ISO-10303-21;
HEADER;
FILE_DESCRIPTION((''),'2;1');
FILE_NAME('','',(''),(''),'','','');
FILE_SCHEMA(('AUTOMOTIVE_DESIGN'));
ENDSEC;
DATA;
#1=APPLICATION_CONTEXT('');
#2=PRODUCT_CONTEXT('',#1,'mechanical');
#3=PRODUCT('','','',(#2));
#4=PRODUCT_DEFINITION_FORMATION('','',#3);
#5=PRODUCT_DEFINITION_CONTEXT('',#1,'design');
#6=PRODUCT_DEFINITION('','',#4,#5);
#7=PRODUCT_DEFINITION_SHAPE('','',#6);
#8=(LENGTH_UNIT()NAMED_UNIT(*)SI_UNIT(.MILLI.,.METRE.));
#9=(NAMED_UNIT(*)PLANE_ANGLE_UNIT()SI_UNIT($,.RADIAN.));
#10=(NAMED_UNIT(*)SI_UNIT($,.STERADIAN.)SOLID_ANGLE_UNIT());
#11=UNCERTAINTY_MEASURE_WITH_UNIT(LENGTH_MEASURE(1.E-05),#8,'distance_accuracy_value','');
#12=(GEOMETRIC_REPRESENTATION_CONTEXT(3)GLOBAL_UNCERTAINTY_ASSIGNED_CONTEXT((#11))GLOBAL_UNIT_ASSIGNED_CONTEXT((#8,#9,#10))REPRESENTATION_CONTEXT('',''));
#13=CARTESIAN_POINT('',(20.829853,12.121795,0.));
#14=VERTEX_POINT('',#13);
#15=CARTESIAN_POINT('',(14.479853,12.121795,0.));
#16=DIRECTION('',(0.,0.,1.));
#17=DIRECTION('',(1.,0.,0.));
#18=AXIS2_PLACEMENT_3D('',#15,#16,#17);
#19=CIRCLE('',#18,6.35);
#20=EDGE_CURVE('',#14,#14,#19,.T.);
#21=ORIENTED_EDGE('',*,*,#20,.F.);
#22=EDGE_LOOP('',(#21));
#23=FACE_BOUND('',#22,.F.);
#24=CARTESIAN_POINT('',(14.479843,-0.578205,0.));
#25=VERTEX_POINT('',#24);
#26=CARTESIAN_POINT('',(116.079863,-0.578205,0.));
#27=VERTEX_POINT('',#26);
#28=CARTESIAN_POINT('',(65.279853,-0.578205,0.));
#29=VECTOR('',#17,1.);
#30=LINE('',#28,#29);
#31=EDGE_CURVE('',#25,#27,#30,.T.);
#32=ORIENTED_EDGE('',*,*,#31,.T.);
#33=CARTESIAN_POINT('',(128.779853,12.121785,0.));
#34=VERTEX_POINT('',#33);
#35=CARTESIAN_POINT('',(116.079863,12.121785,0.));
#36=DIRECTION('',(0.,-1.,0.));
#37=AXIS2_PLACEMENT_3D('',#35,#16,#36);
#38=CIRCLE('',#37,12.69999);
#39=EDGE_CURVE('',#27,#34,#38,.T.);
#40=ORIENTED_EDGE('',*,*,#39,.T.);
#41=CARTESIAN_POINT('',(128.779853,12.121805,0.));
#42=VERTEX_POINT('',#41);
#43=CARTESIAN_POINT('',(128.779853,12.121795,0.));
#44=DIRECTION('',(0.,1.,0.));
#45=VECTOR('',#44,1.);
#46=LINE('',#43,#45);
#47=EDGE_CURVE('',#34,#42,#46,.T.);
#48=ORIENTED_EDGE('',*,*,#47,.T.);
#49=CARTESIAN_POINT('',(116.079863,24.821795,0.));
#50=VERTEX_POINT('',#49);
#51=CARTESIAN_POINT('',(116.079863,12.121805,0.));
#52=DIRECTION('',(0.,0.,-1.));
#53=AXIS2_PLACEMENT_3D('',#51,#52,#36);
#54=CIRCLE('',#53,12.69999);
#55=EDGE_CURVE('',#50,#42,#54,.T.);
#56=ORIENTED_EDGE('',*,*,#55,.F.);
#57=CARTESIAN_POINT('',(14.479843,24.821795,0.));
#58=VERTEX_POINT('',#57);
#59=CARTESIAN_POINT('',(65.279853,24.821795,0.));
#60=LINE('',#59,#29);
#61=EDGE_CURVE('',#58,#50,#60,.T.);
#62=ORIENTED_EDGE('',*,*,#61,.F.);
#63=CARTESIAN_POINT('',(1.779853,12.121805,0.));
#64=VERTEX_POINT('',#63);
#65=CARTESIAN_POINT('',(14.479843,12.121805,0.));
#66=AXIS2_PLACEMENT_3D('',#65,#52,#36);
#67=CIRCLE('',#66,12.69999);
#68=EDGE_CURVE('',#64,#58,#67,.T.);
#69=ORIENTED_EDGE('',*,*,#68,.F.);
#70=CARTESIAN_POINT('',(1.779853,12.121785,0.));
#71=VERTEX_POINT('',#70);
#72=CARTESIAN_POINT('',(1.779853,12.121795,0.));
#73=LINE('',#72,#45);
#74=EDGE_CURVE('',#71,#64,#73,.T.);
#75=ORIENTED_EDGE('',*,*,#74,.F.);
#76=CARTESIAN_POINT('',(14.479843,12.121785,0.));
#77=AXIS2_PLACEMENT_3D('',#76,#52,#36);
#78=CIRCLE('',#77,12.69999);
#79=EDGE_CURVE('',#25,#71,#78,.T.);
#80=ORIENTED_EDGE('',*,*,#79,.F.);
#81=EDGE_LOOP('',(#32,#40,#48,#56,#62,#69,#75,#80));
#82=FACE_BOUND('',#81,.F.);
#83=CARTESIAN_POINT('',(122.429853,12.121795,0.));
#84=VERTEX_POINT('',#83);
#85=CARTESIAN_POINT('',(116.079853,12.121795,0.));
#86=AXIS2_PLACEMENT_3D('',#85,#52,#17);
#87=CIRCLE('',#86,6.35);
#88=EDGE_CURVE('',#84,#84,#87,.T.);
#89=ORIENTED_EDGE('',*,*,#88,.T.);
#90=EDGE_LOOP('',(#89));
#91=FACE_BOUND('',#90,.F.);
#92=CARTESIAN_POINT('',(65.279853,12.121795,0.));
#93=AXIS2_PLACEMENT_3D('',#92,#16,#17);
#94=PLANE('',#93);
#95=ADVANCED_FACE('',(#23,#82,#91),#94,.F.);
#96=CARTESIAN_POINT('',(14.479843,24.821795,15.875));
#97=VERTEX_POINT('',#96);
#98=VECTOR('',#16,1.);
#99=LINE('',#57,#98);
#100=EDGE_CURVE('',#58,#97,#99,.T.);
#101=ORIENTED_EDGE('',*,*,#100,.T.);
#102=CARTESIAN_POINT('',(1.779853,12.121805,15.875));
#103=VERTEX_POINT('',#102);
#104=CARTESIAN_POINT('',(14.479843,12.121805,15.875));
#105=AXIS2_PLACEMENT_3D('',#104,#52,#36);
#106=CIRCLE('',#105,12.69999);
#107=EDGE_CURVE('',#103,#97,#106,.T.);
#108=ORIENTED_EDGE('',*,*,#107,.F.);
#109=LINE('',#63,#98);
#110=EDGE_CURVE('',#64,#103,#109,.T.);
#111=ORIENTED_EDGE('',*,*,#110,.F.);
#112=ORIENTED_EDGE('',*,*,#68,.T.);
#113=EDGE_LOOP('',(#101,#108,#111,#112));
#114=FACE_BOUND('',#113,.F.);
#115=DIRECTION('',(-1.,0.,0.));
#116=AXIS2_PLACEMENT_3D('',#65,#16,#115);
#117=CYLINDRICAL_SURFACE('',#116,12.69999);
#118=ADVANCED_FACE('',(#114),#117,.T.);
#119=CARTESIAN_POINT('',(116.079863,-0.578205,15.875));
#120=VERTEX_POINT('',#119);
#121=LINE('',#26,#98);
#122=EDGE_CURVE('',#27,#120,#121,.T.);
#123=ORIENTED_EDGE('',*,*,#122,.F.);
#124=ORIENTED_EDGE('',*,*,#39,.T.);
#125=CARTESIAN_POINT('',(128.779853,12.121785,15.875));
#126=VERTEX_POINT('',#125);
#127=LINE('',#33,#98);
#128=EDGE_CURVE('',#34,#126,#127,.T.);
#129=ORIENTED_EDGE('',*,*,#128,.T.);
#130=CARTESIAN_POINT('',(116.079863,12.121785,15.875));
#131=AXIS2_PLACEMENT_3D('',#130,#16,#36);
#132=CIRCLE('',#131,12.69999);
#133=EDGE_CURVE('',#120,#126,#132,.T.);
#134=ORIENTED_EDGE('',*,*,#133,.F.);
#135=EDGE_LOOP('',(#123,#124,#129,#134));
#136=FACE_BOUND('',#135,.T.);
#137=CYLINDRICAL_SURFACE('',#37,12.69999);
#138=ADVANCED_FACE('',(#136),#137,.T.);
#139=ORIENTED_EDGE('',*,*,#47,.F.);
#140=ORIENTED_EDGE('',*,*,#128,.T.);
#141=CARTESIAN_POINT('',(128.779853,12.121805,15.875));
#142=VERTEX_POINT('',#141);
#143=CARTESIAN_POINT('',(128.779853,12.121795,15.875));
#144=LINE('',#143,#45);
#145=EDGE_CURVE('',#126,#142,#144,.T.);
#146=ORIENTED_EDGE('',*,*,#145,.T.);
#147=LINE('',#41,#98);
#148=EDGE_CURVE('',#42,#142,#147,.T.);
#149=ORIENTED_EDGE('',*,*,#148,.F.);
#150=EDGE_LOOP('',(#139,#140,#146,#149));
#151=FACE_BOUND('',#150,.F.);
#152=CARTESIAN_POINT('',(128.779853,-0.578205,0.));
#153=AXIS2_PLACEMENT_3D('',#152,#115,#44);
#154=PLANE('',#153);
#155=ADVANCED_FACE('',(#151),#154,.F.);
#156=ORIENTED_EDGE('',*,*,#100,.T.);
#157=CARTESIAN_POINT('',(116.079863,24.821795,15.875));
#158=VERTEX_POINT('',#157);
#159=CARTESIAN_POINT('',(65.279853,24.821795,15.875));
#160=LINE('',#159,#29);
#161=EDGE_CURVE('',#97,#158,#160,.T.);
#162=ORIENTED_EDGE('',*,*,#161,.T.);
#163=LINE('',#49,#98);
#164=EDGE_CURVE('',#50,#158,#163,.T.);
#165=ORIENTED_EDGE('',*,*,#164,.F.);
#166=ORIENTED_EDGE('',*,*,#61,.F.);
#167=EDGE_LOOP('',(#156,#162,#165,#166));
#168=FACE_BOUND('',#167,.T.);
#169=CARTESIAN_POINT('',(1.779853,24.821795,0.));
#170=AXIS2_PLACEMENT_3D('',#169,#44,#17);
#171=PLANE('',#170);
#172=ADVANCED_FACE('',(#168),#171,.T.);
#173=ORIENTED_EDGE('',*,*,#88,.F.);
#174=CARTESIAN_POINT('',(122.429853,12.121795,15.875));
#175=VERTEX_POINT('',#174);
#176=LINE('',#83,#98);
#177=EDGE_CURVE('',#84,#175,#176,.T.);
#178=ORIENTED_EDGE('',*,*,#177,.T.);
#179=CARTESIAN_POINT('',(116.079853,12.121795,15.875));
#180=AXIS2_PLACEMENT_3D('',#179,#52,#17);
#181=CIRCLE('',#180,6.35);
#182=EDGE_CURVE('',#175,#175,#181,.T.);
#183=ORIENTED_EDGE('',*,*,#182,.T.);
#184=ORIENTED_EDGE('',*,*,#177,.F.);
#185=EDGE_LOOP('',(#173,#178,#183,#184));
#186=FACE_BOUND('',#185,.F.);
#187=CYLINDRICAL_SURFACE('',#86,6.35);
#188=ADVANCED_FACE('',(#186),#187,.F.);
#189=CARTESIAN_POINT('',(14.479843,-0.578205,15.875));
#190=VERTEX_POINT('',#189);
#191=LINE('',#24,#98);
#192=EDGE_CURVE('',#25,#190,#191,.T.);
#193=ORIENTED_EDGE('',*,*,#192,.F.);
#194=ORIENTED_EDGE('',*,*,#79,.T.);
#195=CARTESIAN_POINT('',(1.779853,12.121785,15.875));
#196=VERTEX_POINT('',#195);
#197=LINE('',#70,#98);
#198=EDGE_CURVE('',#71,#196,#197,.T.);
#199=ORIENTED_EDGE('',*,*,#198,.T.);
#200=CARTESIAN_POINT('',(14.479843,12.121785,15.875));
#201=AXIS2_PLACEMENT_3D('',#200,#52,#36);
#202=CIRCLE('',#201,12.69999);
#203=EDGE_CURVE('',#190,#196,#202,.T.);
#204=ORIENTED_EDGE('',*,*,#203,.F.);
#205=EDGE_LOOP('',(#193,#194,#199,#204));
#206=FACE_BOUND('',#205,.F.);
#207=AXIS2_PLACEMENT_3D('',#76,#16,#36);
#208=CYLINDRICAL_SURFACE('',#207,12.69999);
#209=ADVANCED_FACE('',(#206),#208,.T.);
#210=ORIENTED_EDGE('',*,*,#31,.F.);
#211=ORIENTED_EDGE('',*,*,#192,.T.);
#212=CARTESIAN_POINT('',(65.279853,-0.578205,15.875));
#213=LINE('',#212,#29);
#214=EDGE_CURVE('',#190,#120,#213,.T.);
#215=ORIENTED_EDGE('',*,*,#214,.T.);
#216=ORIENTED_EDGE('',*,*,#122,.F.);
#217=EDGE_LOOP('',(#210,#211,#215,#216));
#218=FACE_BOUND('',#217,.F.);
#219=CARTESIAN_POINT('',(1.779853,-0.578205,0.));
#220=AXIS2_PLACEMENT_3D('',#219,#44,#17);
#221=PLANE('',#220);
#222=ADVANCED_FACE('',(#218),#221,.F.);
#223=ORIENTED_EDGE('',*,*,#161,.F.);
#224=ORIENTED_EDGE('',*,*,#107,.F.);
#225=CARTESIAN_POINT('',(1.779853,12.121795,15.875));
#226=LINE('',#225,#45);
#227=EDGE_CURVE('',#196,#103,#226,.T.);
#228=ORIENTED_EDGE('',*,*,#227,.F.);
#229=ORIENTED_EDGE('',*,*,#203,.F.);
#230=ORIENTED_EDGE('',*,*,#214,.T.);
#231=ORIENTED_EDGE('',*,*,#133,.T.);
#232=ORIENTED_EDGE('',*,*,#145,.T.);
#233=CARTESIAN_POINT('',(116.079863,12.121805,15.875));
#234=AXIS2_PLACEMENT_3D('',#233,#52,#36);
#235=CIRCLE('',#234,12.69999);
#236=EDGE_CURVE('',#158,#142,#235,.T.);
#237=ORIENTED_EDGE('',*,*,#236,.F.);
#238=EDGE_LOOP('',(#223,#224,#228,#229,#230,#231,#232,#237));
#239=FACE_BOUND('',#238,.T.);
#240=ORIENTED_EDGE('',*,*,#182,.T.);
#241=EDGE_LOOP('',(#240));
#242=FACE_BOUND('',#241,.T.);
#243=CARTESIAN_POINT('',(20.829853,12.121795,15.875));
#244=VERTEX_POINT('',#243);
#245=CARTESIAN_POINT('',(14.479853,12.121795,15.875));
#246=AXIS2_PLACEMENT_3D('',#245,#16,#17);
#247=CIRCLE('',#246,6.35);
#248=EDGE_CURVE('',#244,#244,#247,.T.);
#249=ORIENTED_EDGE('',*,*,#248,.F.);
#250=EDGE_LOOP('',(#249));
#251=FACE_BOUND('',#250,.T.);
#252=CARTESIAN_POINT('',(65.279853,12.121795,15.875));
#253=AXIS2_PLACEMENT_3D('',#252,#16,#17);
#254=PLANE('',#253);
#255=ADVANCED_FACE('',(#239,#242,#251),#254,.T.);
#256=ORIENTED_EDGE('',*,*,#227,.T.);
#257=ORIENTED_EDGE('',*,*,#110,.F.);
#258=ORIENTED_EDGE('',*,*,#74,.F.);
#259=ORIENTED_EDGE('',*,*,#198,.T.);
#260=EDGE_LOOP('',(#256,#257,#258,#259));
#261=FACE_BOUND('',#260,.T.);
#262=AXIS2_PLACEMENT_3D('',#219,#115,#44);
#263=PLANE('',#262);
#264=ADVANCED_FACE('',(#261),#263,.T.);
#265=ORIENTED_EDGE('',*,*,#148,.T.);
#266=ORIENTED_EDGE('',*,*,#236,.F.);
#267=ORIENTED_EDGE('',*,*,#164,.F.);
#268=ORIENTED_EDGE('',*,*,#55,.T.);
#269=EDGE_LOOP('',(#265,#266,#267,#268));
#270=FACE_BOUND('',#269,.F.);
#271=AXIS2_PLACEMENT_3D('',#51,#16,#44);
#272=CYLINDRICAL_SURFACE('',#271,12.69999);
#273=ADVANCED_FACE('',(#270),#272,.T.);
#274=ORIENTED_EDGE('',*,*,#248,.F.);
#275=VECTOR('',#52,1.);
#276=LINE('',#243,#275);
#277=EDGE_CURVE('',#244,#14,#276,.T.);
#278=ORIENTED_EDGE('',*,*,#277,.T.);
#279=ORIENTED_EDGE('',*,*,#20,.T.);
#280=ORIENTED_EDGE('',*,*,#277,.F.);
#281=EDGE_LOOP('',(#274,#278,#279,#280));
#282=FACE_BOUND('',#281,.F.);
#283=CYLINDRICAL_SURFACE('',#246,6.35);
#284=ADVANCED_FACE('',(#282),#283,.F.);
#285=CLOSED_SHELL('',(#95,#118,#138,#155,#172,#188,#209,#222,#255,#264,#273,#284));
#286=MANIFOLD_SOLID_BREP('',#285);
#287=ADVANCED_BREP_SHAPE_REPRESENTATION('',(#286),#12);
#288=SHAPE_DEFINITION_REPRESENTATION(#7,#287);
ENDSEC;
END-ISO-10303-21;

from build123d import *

# Parameters (mm, degrees)
F0_W     = 127
F0_H     = 25.4
F1_DEPTH = 15.875
F2_R     = 6.35
F3_DEPTH = 15.876
F4_R     = 12.69999
F5_R     = 6.35
F6_DEPTH = 15.876
F7_R     = 12.69999


# Not quite as in the source:
# - a fillet or chamfer is up to 0.001 mm smaller than in the source, because OpenCascade refuses the exact size


with BuildPart() as f1:
    # F0 (on Top) → F1 (new body)
    with BuildSketch(Plane.XY):
        with Locations((65.2798527717, 12.1217946971)):
            Rectangle(F0_W, F0_H)
    extrude(amount=F1_DEPTH)

    # F2 (on face) → F3 (cut, through all)
    with BuildSketch(Plane(origin=(0, 0, 0), x_dir=(1, 0, 0), z_dir=(0, 0, -1))):
        with Locations((116.0798527717, -12.1217946971)):
            Circle(F2_R)
    extrude(amount=-F3_DEPTH, mode=Mode.SUBTRACT)

    # F4 (radius 12.7 in the source; OpenCascade refuses exactly that, so slightly less here)
    f4_edges = [f1.edges().sort_by_distance(p)[0] for p in [
        (128.779853, 24.821795, 7.9375),
        (128.779853, -0.578205, 7.9375),
    ]]
    fillet(f4_edges, radius=F4_R)

    # F5 (on face) → F6 (cut, through all)
    with BuildSketch(Plane.XY.offset(15.875)):
        with Locations((14.4798527717, 12.1217946971)):
            Circle(F5_R)
    extrude(amount=-F6_DEPTH, mode=Mode.SUBTRACT)

    # F7 (radius 12.7 in the source; OpenCascade refuses exactly that, so slightly less here)
    f7_edges = [f1.edges().sort_by_distance(p)[0] for p in [
        (1.779853, 24.821795, 7.9375),
        (1.779853, -0.578205, 7.9375),
    ]]
    fillet(f7_edges, radius=F7_R)


solid = f1.part
